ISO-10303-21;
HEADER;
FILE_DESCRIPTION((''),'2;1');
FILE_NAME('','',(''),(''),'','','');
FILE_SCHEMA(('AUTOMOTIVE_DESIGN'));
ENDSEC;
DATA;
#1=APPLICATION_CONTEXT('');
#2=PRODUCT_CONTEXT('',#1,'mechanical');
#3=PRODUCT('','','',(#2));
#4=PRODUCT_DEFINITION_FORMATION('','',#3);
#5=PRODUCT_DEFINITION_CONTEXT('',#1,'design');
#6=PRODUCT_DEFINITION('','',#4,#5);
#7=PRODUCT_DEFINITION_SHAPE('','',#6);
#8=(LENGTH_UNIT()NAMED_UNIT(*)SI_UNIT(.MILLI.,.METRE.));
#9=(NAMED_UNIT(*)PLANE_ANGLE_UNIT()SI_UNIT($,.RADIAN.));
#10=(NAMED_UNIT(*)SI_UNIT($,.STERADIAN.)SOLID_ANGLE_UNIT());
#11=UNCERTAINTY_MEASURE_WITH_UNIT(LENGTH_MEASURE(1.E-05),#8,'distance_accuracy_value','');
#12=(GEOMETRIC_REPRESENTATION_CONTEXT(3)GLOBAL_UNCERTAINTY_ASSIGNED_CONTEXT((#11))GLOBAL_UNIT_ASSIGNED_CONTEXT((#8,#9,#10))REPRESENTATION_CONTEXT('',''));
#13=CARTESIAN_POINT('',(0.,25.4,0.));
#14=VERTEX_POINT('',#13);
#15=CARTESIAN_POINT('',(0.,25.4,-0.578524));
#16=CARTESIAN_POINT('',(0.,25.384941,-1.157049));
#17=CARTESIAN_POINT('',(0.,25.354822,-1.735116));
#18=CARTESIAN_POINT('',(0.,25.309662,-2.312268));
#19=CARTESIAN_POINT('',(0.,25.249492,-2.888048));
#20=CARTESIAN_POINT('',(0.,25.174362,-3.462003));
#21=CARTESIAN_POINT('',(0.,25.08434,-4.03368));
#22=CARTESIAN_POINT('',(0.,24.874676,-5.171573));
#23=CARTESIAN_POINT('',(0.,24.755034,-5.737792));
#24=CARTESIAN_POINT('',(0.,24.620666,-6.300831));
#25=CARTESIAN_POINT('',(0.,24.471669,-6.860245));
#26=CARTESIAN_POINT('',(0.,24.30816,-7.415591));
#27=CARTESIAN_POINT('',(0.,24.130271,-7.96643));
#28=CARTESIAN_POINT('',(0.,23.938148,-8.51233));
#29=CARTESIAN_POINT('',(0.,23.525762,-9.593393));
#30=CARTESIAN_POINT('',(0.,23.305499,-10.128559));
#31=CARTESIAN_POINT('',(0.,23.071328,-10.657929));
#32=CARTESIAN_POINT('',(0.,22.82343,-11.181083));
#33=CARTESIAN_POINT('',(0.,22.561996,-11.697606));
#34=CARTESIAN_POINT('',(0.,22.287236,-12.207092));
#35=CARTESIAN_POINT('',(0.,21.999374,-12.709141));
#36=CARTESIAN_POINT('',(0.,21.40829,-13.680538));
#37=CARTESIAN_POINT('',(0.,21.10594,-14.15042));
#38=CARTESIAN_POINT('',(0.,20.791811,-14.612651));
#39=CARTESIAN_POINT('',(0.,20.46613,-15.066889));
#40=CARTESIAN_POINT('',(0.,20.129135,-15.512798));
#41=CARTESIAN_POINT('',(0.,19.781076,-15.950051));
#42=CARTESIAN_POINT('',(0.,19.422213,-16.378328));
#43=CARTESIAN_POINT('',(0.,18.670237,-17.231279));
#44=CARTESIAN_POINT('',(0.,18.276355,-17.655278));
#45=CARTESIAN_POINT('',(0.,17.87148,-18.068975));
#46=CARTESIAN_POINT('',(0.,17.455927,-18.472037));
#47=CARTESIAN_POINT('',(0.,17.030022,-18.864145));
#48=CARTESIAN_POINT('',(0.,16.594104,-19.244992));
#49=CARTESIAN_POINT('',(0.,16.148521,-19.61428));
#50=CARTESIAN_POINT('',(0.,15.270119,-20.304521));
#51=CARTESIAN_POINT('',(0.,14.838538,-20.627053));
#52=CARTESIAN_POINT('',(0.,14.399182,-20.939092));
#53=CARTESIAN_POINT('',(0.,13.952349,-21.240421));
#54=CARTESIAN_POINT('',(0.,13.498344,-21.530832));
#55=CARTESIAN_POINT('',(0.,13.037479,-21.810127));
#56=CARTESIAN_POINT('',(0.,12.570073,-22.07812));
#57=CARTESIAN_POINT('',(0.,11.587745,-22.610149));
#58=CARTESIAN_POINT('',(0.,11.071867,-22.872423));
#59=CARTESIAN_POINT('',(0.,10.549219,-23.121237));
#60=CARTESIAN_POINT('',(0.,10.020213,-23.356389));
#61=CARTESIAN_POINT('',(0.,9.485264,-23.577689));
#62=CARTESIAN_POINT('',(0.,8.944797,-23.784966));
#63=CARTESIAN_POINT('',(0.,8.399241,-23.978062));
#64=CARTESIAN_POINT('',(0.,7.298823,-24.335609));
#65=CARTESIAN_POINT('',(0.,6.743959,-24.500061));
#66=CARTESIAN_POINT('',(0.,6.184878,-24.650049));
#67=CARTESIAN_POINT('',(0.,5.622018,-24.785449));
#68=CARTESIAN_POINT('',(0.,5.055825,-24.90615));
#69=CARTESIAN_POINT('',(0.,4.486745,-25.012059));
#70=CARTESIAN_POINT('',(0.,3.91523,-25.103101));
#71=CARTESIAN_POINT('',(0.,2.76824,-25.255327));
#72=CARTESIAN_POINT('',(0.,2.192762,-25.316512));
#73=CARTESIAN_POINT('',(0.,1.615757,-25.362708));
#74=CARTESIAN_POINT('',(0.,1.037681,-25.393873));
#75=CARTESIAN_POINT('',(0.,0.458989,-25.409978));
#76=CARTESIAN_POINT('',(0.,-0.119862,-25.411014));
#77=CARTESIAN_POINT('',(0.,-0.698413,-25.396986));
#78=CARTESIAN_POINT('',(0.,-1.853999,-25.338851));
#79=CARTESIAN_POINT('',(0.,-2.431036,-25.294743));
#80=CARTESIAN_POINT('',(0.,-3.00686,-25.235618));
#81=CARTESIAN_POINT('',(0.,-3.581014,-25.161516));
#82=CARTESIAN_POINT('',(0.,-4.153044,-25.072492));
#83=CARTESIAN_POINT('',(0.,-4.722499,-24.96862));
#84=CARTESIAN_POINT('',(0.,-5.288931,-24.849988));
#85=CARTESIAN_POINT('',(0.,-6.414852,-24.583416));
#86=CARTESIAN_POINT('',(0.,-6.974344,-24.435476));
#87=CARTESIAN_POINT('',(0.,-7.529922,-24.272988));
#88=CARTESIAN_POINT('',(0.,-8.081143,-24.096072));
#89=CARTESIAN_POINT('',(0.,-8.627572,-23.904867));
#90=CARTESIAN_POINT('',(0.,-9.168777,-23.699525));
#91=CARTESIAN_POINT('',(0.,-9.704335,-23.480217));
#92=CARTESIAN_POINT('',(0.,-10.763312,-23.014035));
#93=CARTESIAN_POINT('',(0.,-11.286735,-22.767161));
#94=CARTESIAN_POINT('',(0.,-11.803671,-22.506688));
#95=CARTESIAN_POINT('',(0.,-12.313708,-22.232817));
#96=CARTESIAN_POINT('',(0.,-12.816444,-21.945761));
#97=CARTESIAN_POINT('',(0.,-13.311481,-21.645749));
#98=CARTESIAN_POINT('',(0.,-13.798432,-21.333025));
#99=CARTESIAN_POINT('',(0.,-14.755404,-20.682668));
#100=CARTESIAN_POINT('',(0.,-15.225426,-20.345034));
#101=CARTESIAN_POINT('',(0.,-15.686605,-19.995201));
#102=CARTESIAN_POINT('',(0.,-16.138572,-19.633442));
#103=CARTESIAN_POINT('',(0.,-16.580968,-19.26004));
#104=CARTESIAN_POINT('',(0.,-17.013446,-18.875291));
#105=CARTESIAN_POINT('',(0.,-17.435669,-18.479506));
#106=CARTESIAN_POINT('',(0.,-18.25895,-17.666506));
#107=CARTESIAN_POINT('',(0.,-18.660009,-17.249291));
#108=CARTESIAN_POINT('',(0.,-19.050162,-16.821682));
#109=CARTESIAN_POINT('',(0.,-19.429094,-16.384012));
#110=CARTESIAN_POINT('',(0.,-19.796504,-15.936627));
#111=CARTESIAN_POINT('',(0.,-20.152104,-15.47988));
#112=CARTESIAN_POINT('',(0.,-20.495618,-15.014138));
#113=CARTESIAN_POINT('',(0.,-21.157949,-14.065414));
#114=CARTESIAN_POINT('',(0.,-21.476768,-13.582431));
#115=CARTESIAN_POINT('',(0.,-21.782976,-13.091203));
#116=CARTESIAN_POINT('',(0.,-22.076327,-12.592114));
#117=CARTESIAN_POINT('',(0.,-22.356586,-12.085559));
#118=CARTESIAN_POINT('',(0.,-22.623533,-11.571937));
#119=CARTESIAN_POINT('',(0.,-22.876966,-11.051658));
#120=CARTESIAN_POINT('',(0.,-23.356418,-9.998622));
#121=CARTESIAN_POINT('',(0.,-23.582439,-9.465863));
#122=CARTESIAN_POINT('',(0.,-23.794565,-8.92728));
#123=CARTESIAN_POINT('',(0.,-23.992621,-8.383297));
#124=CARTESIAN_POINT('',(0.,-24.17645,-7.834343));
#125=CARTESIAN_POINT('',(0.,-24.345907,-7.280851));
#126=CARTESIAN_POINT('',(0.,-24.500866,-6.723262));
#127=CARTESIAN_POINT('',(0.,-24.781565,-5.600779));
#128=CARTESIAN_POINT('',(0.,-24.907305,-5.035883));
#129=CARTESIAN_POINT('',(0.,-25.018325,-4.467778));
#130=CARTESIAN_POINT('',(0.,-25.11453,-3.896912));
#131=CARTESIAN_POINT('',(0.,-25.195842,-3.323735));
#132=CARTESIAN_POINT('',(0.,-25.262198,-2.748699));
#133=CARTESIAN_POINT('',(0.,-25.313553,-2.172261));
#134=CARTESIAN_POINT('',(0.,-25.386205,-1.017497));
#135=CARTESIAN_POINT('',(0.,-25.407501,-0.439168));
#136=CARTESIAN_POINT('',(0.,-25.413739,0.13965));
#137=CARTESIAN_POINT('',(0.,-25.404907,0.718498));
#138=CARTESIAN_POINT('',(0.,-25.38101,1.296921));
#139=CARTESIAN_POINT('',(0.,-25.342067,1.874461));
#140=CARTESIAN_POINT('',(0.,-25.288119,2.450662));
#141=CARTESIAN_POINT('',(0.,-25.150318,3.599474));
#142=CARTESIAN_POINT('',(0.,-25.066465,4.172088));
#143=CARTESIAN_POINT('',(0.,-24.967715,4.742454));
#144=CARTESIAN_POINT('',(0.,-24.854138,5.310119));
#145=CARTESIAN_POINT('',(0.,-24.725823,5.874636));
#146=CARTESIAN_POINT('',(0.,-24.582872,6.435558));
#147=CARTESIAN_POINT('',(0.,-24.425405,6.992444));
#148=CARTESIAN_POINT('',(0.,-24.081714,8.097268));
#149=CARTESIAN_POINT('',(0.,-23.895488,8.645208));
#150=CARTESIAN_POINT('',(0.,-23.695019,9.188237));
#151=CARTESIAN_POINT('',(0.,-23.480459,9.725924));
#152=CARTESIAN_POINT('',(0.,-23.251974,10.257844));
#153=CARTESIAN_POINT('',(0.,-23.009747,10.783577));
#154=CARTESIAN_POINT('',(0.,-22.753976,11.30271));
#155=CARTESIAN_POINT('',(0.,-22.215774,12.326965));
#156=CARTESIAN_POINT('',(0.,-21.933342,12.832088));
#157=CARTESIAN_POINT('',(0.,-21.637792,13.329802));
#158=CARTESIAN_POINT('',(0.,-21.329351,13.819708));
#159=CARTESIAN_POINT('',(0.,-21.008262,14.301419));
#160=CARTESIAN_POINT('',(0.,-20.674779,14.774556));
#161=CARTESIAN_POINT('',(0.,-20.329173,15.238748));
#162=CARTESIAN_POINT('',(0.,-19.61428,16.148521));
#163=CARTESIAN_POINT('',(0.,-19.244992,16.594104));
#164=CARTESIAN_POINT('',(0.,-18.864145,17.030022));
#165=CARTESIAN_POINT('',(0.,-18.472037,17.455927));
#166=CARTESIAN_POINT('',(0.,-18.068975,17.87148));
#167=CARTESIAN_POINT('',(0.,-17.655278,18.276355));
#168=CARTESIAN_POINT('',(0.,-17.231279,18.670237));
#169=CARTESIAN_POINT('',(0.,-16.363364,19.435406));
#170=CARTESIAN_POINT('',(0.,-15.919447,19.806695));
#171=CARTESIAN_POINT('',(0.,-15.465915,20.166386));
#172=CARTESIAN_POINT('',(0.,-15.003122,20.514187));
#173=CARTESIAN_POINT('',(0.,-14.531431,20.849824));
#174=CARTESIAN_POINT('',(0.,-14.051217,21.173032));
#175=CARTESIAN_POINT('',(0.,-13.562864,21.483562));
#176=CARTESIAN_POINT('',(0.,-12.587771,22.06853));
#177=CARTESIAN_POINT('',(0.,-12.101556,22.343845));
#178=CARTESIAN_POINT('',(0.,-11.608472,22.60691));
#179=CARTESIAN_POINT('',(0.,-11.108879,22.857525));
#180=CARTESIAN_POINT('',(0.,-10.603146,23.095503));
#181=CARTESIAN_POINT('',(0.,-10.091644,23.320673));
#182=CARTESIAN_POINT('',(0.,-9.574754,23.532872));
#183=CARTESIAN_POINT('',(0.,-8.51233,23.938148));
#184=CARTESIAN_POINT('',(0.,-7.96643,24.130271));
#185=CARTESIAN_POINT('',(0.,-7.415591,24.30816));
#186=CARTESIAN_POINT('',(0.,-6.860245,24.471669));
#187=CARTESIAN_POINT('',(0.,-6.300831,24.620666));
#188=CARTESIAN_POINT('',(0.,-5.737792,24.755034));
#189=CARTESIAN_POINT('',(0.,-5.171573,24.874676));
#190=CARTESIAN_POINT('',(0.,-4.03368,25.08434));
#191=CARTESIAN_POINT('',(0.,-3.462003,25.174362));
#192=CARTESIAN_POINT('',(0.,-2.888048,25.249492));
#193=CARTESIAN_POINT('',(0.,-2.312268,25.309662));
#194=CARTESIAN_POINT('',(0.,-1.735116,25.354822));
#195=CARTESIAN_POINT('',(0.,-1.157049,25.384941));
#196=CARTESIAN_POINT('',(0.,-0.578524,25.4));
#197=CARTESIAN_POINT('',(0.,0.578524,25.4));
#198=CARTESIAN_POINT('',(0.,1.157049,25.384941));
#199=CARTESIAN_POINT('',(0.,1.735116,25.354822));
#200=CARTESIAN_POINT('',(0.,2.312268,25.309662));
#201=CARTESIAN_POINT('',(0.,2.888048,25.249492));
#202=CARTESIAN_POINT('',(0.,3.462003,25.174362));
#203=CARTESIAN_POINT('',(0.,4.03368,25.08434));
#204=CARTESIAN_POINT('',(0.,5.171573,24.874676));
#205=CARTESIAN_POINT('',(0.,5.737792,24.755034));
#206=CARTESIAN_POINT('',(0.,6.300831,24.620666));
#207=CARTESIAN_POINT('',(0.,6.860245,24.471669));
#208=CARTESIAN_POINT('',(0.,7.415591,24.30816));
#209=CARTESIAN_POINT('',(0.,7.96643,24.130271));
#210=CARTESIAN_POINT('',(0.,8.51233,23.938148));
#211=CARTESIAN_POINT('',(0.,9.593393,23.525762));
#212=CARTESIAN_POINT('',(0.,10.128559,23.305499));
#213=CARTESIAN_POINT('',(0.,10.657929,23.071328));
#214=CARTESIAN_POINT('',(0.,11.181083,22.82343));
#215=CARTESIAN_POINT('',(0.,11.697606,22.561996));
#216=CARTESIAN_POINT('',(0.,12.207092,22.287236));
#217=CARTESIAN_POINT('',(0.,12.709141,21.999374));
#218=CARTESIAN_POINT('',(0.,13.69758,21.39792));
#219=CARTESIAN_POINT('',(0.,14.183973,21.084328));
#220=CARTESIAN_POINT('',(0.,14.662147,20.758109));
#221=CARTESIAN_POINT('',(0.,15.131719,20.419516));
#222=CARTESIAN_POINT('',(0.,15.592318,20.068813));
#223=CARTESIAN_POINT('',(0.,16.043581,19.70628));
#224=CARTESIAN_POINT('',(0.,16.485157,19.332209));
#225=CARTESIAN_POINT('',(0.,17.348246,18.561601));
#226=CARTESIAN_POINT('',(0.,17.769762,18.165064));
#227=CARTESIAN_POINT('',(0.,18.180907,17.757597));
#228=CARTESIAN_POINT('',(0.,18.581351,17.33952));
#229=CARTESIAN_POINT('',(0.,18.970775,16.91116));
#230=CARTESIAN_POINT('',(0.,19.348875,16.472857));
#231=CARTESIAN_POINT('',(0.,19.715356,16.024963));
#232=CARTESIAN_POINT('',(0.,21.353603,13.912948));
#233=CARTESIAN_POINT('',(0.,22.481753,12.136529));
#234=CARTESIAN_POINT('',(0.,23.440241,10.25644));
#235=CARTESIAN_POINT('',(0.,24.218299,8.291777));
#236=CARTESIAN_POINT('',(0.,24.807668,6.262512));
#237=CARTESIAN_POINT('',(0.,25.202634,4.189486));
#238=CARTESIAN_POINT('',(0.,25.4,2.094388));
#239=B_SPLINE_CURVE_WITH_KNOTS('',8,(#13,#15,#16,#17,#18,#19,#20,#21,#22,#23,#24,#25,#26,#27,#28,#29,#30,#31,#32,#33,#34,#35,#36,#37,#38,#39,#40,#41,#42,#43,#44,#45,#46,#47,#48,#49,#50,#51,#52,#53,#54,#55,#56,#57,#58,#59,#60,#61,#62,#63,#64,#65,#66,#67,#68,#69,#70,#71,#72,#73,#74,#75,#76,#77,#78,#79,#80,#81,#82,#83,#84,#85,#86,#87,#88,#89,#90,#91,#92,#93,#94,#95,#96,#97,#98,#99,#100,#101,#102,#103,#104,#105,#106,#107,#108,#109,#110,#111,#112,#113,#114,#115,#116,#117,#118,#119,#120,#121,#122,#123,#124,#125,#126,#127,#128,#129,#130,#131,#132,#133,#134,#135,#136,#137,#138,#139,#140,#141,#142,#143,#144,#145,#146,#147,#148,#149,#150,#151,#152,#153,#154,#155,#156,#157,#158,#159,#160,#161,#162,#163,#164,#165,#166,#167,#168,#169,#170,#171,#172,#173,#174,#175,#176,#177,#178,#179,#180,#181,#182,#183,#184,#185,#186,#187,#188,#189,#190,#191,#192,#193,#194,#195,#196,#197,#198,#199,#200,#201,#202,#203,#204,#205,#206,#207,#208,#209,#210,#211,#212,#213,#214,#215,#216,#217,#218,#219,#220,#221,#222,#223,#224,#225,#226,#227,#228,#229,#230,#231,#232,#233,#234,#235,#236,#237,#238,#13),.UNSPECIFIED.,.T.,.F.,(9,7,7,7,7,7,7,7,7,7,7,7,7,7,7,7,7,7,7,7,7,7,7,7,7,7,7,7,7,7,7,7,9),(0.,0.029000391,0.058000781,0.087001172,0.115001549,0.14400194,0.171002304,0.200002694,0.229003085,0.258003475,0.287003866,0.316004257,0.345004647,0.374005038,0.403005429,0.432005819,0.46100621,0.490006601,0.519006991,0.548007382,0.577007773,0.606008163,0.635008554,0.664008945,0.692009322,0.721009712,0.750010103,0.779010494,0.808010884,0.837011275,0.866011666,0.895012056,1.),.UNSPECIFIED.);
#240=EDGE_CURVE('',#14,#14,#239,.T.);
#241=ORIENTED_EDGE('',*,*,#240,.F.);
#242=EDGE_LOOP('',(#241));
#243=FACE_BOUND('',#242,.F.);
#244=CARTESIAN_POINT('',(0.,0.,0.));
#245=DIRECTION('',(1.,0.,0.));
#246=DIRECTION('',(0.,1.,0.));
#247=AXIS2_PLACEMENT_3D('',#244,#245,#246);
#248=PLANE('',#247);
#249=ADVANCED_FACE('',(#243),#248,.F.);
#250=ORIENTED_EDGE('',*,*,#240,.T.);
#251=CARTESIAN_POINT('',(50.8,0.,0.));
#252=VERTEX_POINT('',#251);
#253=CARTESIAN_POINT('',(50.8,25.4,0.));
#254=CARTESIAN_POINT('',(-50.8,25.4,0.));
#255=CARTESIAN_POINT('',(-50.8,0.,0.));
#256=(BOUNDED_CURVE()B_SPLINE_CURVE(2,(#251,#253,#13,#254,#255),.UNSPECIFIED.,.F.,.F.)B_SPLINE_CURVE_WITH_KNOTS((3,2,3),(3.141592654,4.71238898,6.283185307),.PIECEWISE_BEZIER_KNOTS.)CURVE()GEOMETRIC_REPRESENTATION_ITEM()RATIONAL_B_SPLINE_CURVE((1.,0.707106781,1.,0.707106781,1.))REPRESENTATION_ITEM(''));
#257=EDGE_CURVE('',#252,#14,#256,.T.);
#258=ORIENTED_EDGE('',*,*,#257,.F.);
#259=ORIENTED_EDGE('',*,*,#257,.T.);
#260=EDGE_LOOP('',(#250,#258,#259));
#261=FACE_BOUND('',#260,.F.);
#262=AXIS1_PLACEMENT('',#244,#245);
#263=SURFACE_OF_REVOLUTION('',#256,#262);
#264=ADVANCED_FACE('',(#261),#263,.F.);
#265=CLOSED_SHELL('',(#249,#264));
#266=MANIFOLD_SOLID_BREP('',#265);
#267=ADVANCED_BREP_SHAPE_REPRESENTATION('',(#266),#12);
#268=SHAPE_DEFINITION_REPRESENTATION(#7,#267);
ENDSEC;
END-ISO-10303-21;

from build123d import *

# Parameters (mm, degrees)
F1_R     = 50.8
F3_DEPTH = 125


# Not quite as in the source:
# - an extrude ends at something that could not be found from the text; its depth is read off the source's solid


with BuildPart() as f2:
    # F0 (on Top) → F2 (revolve)
    with BuildSketch(Plane.XY):
        with BuildLine():
            add(Edge.make_bspline(
                [(50.8, 0), (50.8, 25.4), (0, 25.4), (-50.8, 25.4), (-50.8, 0)],
                knots=[3.1415926536, 3.1415926536, 3.1415926536, 4.7123889804, 4.7123889804, 6.2831853072, 6.2831853072, 6.2831853072], degree=2, weights=[1, 0.7071067812, 1, 0.7071067812, 1]))
            Line((-50.8, 0), (50.8, 0))
        make_face()
    revolve(axis=Axis((0, 0, 0), (1, 0, 0)))

    # F1 (on Right) → F3 (cut, through all)
    with BuildSketch(Plane.YZ):
        Circle(F1_R)
    extrude(amount=-F3_DEPTH, mode=Mode.SUBTRACT)


solid = f2.part
